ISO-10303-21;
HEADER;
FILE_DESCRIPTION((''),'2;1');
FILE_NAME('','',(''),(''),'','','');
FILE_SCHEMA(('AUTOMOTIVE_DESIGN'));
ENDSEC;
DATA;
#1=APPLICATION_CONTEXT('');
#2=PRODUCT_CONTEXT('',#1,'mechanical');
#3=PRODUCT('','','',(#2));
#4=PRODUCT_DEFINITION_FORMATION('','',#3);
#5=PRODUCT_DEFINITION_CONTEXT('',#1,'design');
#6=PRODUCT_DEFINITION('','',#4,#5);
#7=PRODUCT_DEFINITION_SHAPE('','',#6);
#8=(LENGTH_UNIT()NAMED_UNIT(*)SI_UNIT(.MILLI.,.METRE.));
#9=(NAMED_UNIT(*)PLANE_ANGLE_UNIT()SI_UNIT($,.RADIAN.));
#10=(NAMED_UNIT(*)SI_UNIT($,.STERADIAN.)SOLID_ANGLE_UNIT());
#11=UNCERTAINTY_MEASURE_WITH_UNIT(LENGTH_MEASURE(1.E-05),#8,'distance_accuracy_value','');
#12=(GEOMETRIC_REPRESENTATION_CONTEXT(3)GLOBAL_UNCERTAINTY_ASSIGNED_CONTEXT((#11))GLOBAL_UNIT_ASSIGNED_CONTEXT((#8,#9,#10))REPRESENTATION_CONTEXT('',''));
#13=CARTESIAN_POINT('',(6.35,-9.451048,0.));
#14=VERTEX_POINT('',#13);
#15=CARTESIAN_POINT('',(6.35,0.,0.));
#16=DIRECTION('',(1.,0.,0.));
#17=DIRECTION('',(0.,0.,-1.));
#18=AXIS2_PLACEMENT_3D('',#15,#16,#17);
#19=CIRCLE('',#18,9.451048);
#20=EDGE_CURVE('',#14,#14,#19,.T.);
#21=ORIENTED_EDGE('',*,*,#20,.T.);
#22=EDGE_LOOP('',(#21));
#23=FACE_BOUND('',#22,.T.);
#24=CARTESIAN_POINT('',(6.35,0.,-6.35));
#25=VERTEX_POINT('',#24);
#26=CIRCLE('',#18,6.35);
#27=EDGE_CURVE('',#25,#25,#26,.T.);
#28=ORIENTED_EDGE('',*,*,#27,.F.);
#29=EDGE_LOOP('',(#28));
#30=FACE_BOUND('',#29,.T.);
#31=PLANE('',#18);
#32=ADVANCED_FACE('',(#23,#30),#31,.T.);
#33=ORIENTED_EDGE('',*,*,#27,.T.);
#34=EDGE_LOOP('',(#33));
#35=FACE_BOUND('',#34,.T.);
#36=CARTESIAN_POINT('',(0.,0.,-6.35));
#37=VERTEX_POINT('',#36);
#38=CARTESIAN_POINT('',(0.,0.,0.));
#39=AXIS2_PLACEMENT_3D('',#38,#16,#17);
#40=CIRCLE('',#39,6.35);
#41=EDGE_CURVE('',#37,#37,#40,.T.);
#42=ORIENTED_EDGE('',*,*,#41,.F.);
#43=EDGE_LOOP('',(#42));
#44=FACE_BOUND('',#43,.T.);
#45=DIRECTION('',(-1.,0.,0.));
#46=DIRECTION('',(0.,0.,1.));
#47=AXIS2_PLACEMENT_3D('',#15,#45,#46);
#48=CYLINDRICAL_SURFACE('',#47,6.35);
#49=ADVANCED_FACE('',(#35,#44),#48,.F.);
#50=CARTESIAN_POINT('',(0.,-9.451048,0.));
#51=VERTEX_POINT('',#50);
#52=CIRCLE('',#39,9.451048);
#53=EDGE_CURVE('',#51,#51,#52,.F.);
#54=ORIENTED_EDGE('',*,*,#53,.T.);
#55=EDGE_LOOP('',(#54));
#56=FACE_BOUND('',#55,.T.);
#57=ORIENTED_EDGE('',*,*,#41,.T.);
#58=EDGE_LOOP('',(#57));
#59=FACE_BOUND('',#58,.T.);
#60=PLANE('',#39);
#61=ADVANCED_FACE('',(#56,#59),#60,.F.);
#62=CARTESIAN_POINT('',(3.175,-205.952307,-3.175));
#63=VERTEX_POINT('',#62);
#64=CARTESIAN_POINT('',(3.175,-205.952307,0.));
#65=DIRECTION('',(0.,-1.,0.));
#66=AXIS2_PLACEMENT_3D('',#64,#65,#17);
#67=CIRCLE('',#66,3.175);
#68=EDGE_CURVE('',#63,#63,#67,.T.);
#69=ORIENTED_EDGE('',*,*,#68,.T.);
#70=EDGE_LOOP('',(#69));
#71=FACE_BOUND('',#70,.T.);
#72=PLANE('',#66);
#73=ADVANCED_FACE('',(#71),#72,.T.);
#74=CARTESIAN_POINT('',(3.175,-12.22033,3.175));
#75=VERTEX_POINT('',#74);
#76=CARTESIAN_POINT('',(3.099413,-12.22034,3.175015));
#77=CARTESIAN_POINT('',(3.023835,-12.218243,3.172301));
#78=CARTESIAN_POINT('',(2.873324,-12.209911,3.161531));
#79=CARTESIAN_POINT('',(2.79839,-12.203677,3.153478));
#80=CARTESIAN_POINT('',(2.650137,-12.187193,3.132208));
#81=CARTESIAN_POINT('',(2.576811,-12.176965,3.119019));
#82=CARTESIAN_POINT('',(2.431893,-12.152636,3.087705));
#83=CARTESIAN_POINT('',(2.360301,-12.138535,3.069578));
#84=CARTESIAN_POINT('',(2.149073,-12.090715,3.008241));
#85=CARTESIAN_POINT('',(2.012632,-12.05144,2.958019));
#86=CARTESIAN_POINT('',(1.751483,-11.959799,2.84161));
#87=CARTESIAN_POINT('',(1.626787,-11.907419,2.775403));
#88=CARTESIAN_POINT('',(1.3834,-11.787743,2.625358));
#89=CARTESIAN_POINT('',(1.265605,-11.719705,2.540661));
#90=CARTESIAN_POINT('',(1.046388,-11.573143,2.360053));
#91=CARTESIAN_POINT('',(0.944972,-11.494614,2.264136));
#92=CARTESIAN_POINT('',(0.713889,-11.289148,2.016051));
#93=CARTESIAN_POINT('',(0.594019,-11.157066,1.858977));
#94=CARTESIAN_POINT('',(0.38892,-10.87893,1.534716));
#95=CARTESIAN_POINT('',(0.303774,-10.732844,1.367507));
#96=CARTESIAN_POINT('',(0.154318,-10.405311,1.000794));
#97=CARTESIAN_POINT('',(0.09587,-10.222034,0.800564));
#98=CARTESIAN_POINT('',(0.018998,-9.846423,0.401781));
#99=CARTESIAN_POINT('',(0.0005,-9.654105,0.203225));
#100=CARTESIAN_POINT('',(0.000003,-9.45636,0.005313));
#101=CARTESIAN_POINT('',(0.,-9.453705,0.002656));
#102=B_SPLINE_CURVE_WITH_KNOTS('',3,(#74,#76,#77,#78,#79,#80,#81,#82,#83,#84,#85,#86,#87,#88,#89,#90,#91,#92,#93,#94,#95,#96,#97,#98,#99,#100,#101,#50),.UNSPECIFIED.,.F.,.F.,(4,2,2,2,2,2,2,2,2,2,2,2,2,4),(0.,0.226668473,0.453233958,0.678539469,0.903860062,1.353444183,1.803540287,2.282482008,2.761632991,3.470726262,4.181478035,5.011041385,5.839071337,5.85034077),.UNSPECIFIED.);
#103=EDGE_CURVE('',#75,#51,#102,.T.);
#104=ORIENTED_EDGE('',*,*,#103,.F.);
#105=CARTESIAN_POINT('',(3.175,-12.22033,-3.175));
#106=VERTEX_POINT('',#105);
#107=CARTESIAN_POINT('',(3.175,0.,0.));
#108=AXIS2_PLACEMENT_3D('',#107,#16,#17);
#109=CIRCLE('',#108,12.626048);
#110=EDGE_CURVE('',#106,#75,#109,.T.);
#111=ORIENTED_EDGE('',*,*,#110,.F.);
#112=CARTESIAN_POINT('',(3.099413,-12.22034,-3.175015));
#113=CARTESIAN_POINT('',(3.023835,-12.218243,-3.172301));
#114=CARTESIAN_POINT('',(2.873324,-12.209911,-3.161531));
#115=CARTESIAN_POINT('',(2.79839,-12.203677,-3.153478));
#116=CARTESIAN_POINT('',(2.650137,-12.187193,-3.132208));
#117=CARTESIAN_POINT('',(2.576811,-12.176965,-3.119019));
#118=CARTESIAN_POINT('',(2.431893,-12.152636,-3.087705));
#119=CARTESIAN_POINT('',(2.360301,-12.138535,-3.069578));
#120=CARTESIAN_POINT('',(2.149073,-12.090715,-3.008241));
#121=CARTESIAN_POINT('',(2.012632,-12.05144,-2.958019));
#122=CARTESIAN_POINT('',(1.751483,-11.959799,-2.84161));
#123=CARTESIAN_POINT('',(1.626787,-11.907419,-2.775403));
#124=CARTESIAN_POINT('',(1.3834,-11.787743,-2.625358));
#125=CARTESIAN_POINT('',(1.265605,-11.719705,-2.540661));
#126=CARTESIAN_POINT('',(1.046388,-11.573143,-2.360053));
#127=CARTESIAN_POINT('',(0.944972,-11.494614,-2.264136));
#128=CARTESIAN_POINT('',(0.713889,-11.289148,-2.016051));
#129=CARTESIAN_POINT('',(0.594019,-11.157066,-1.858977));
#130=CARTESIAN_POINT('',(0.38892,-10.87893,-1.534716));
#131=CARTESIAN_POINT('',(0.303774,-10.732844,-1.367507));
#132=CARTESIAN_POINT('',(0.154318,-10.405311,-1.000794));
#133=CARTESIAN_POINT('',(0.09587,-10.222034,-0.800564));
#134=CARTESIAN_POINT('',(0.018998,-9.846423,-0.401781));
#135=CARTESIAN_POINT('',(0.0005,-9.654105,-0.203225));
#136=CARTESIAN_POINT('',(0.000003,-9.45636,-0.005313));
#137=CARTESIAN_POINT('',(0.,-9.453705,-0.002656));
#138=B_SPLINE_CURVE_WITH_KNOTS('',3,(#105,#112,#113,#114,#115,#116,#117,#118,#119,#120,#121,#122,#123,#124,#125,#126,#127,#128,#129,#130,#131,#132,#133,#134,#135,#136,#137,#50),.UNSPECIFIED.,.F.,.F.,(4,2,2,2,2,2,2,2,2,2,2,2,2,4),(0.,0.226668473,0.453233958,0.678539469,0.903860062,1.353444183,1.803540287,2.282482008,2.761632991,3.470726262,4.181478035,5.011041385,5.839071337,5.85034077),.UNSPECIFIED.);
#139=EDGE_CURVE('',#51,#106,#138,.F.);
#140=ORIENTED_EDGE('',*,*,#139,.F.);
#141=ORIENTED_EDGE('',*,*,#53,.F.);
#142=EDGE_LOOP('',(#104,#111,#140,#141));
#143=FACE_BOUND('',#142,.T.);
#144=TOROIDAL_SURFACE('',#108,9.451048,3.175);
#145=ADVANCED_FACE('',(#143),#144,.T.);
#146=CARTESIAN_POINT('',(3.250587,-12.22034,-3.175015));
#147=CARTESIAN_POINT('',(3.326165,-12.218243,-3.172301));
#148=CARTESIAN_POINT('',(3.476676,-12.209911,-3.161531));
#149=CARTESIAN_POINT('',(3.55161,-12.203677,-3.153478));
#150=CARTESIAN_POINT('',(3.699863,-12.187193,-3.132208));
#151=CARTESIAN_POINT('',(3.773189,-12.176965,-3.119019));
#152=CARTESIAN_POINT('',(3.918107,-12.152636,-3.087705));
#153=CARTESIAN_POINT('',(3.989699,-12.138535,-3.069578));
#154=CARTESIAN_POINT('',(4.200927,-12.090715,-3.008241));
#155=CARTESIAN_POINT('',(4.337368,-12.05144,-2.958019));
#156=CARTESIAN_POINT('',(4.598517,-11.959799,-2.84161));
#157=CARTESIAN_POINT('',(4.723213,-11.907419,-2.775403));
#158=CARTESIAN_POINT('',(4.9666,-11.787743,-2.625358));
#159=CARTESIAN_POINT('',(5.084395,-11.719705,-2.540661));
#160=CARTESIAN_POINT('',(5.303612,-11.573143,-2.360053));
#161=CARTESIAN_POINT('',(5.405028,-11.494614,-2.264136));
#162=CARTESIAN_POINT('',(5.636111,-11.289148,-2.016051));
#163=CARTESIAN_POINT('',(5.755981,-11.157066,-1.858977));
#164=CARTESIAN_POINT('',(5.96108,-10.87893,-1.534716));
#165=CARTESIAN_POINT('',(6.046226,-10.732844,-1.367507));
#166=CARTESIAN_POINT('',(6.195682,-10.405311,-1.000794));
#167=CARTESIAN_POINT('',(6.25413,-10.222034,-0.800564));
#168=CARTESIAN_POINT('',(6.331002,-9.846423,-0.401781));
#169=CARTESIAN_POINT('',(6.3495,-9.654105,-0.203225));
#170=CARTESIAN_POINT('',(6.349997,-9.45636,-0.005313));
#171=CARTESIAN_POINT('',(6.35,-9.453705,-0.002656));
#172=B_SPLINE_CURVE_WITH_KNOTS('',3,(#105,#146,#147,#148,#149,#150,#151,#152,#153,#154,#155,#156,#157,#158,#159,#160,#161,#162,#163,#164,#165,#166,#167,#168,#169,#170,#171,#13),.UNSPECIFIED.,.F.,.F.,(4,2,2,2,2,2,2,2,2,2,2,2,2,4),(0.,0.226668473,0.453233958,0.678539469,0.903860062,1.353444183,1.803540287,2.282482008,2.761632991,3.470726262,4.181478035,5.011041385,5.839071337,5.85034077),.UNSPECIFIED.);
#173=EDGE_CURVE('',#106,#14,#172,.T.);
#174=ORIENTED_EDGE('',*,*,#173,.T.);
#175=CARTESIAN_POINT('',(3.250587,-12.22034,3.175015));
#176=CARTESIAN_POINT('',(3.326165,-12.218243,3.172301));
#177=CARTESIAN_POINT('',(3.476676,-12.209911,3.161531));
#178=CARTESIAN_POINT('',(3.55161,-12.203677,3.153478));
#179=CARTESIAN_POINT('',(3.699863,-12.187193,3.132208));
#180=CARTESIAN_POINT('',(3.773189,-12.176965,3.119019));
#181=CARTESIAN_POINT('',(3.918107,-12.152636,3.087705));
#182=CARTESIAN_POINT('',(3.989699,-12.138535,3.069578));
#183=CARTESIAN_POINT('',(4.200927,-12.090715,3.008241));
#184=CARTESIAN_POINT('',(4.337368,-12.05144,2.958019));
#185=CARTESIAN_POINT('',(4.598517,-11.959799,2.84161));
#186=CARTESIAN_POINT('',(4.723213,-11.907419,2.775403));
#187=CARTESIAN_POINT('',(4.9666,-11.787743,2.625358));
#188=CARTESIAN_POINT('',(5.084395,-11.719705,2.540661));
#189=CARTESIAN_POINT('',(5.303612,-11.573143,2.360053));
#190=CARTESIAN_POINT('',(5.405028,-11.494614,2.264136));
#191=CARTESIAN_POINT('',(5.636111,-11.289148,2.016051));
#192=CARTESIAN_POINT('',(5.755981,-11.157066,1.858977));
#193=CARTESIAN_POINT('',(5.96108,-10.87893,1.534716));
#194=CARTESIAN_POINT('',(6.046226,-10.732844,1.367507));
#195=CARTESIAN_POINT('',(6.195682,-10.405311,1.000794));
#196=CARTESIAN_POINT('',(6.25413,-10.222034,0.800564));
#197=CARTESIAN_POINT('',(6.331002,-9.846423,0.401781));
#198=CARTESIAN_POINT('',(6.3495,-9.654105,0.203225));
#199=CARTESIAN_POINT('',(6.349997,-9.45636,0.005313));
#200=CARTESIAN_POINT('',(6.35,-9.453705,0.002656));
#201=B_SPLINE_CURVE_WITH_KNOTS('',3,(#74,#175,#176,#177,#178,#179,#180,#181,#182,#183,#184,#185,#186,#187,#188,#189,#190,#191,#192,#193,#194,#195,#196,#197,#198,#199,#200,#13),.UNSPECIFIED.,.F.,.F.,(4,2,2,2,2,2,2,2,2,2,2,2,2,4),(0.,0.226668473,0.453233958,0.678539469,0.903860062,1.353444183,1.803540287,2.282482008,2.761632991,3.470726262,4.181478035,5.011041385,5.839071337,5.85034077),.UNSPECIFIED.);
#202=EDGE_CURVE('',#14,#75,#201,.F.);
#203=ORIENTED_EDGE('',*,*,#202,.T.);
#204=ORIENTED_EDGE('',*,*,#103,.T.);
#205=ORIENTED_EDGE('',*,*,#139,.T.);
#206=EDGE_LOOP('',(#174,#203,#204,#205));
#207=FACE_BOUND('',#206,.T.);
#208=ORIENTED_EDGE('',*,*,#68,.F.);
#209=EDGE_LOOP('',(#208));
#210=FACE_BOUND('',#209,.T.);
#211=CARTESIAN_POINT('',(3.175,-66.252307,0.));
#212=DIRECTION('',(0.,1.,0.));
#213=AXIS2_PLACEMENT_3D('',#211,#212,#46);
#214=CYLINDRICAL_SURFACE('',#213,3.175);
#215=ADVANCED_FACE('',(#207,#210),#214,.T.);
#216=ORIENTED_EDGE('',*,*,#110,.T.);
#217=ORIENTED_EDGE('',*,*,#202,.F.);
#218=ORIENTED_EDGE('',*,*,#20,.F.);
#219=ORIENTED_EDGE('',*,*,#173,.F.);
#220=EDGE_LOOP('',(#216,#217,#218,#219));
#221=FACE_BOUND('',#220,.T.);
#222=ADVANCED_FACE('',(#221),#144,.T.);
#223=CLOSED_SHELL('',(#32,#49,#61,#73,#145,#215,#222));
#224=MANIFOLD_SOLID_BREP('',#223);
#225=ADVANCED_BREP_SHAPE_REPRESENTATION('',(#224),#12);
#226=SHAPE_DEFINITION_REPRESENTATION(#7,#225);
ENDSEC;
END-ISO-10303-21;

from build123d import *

# Parameters (mm, degrees)
SKETCH1_R                = 12.626048476
SKETCH1_R_2              = 6.35
BOSS_EXTRUDE1_DEPTH      = 6.35
BOSS_EXTRUDE2_DEPTH      = 6.35
SKETCH4_R                = 3.175
BOSS_EXTRUDE3_DEPTH      = 50.8
CUT_EXTRUDE1_START       = -6.35
CUT_EXTRUDE1_DEPTH       = 6.35
SKETCH7_R                = 3.175
BOSS_EXTRUDE4_DEPTH      = 57.15
SKETCH7_2_R              = 3.175
CUT_EXTRUDE2_DEPTH       = 25.4
FILLET1_R                = 3.175
BOSS_EXTRUDE5_DEPTH      = 139.7
BOSS_EXTRUDE5_DEPTH_BACK = 25.4
SKETCH7_3_R              = 3.175


with BuildPart() as part:
    # Sketch1 → Boss-Extrude1 (new body)
    with BuildSketch(Plane(origin=(0, 0, 0), x_dir=(0, 0, -1), z_dir=(1, 0, 0))):
        Circle(SKETCH1_R)
        Circle(SKETCH1_R_2, mode=Mode.SUBTRACT)
    extrude(amount=BOSS_EXTRUDE1_DEPTH)

    # Sketch3 → Boss-Extrude2 (add)
    with BuildSketch(Plane(origin=(6.35, 0, 0), x_dir=(0, 0, -1), z_dir=(1, 0, 0))):
        Polygon((-8.994798287, -8.860626609), (-8.994798287, -15.452306957), (10.798615768, -15.452306957), (10.798615768, -6.542705681), (-8.994798287, -6.542705681), align=None)
    extrude(amount=-BOSS_EXTRUDE2_DEPTH)

    # Sketch4 → Boss-Extrude3 (add)
    with BuildSketch(Plane.XZ.offset(15.452306957)):
        with Locations(Location((3.175, 0, 0), (0, 0, 180))):
            Circle(SKETCH4_R)
    extrude(amount=BOSS_EXTRUDE3_DEPTH)

    # Sketch5 → Cut-Extrude1 (cut)
    with BuildSketch(Plane(origin=(6.35, 0, 0), x_dir=(0, 0, -1), z_dir=(1, 0, 0)).offset(CUT_EXTRUDE1_START)):
        with BuildLine():
            Line((-8.994798287, -8.860626609), (-8.994798287, -15.452306957))
            Line((-8.994798287, -15.452306957), (10.798615768, -15.452306957))
            Line((10.798615768, -15.452306957), (10.798615768, -6.542705681))
            ThreePointArc((10.798615768, -6.542705681), (1.46854647, -12.540353719), (-8.994798287, -8.860626609))
        make_face()
    extrude(amount=CUT_EXTRUDE1_DEPTH, mode=Mode.SUBTRACT)


with BuildPart() as cut_extrude1_piece_1:
    # of the separate pieces the step leaves, piece 1, a body of its own (cut_extrude1_pieces)
    add(part.part.solids().sort_by_distance((0, -6.542705681, -10.798615768))[0])



with BuildPart() as cut_extrude1_piece_2:
    # of the separate pieces the step leaves, piece 2, a body of its own (cut_extrude1_pieces)
    add(part.part.solids().sort_by_distance((0, -15.452306957, 0))[0])


with BuildPart() as cut_extrude1_piece_1_1:
    add(cut_extrude1_piece_1.part)

    add(cut_extrude1_piece_2.part)  # Boss-Extrude4 merges Cut-Extrude1 piece 2
    # Sketch7 → Boss-Extrude4 (add)
    with BuildSketch(Plane.XZ.offset(66.252306957)):
        with Locations((3.175, 0)):
            Circle(SKETCH7_R)
    extrude(amount=-BOSS_EXTRUDE4_DEPTH)

    # Sketch7<2> → Cut-Extrude2 (cut)
    with BuildSketch(Plane.XZ.offset(66.252306957)):
        with Locations((3.175, 0)):
            Circle(SKETCH7_2_R)
    extrude(amount=-CUT_EXTRUDE2_DEPTH, mode=Mode.SUBTRACT)

    # Fillet1
    # the kernel refuses this fillet: 3.175 mm, written as the material it takes off along each edge
    with BuildSketch(Plane(origin=(6.35, 0, 0), x_dir=(0, -0.7017735299957855, 0.7124001071008161), z_dir=(0, -0.7124001071008161, -0.7017735299957855))) as fillet1_piece_1:
        with BuildLine():
            CenterArc((12.626048476 - FILLET1_R, FILLET1_R), FILLET1_R, 270, 90)
            Line((12.626048476 - FILLET1_R, 0), (12.626048476, 0))
            Line((12.626048476, 0), (12.626048476, FILLET1_R))
        make_face()
    revolve(axis=Axis((6.35, 0, 0), (-1, 0, 0)), revolution_arc=255.78045899, mode=Mode.SUBTRACT)
    with BuildSketch(Plane(origin=(0, 0, 0), x_dir=(0, -0.5181910787843432, -0.855264874684047), z_dir=(0, -0.855264874684047, 0.5181910787843432))) as fillet1_piece_2:
        with BuildLine():
            CenterArc((12.626048476 - FILLET1_R, FILLET1_R), FILLET1_R, 270, 90)
            Line((12.626048476 - FILLET1_R, 0), (12.626048476, 0))
            Line((12.626048476, 0), (12.626048476, FILLET1_R))
        make_face()
    revolve(axis=Axis((0, 0, 0), (1, 0, 0)), revolution_arc=255.78045899, mode=Mode.SUBTRACT)
    with BuildSketch(Plane(origin=(0, 0, 0), x_dir=(0, -0.5181910787843435, -0.8552648746840469), z_dir=(0, 0.8552648746840469, -0.5181910787843435))) as fillet1_piece_3_section:
        with BuildLine():
            CenterArc((12.626048476 - FILLET1_R, -FILLET1_R), FILLET1_R, 0, 90)
            Line((12.626048476 - FILLET1_R, 0), (12.626048476, 0))
            Line((12.626048476, 0), (12.626048476, -FILLET1_R))
        make_face()
    fillet1_piece_3 = revolve(axis=Axis((0, 0, 0), (-1, 0, 0)), revolution_arc=58.789009325, mode=Mode.PRIVATE)
    fillet1_piece_3 = fillet1_piece_3 - Plane(origin=(3.175, -9.611252213, 0), x_dir=(1, 0, 0), z_dir=(0, -1, 0)) * Cylinder(3.175, 51, mode=Mode.PRIVATE)
    add(fillet1_piece_3, mode=Mode.SUBTRACT)
    with BuildSketch(Plane(origin=(0, 0, 0), x_dir=(0, -1, 0), z_dir=(0, 0, -1))) as fillet1_piece_4_section:
        with BuildLine():
            CenterArc((12.626048476 - FILLET1_R, -FILLET1_R), FILLET1_R, 0, 90)
            Line((12.626048476 - FILLET1_R, 0), (12.626048476, 0))
            Line((12.626048476, 0), (12.626048476, -FILLET1_R))
        make_face()
    fillet1_piece_4 = revolve(axis=Axis((0, 0, 0), (-1, 0, 0)), revolution_arc=45.430531685, mode=Mode.PRIVATE)
    fillet1_piece_4 = fillet1_piece_4 - Plane(origin=(3.175, -10.439695548, 0), x_dir=(1, 0, 0), z_dir=(0, -1, 0)) * Cylinder(3.175, 51, mode=Mode.PRIVATE)
    add(fillet1_piece_4, mode=Mode.SUBTRACT)
    with BuildSketch(Plane(origin=(6.35, 0, 0), x_dir=(0, -1, 0), z_dir=(0, 0, -1))) as fillet1_piece_5_section:
        with BuildLine():
            CenterArc((12.626048476 - FILLET1_R, FILLET1_R), FILLET1_R, 270, 90)
            Line((12.626048476 - FILLET1_R, 0), (12.626048476, 0))
            Line((12.626048476, 0), (12.626048476, FILLET1_R))
        make_face()
    fillet1_piece_5 = revolve(axis=Axis((6.35, 0, 0), (-1, 0, 0)), revolution_arc=45.430531685, mode=Mode.PRIVATE)
    fillet1_piece_5 = fillet1_piece_5 - Plane(origin=(3.175, -10.439696502, 0), x_dir=(1, 0, 0), z_dir=(0, -1, 0)) * Cylinder(3.175, 51, mode=Mode.PRIVATE)
    add(fillet1_piece_5, mode=Mode.SUBTRACT)
    with BuildSketch(Plane(origin=(6.35, 0, 0), x_dir=(0, -0.5181910787843435, -0.8552648746840469), z_dir=(0, 0.8552648746840469, -0.5181910787843435))) as fillet1_piece_6_section:
        with BuildLine():
            CenterArc((12.626048476 - FILLET1_R, FILLET1_R), FILLET1_R, 270, 90)
            Line((12.626048476 - FILLET1_R, 0), (12.626048476, 0))
            Line((12.626048476, 0), (12.626048476, FILLET1_R))
        make_face()
    fillet1_piece_6 = revolve(axis=Axis((6.35, 0, 0), (-1, 0, 0)), revolution_arc=58.789009325, mode=Mode.PRIVATE)
    fillet1_piece_6 = fillet1_piece_6 - Plane(origin=(3.175, -9.611252422, 0), x_dir=(1, 0, 0), z_dir=(0, -1, 0)) * Cylinder(3.175, 51, mode=Mode.PRIVATE)
    add(fillet1_piece_6, mode=Mode.SUBTRACT)

    # Sketch7<3> → Boss-Extrude5 (add, two sides: drawn at the far end of the back side and taken through both)
    with BuildSketch(Plane.XZ.offset(66.252306957).offset(-BOSS_EXTRUDE5_DEPTH_BACK)):
        with Locations(Location((3.175, 0, 0), (0, 0, 270))):
            Circle(SKETCH7_3_R)
    extrude(amount=BOSS_EXTRUDE5_DEPTH + BOSS_EXTRUDE5_DEPTH_BACK)


solid = cut_extrude1_piece_1_1.part
